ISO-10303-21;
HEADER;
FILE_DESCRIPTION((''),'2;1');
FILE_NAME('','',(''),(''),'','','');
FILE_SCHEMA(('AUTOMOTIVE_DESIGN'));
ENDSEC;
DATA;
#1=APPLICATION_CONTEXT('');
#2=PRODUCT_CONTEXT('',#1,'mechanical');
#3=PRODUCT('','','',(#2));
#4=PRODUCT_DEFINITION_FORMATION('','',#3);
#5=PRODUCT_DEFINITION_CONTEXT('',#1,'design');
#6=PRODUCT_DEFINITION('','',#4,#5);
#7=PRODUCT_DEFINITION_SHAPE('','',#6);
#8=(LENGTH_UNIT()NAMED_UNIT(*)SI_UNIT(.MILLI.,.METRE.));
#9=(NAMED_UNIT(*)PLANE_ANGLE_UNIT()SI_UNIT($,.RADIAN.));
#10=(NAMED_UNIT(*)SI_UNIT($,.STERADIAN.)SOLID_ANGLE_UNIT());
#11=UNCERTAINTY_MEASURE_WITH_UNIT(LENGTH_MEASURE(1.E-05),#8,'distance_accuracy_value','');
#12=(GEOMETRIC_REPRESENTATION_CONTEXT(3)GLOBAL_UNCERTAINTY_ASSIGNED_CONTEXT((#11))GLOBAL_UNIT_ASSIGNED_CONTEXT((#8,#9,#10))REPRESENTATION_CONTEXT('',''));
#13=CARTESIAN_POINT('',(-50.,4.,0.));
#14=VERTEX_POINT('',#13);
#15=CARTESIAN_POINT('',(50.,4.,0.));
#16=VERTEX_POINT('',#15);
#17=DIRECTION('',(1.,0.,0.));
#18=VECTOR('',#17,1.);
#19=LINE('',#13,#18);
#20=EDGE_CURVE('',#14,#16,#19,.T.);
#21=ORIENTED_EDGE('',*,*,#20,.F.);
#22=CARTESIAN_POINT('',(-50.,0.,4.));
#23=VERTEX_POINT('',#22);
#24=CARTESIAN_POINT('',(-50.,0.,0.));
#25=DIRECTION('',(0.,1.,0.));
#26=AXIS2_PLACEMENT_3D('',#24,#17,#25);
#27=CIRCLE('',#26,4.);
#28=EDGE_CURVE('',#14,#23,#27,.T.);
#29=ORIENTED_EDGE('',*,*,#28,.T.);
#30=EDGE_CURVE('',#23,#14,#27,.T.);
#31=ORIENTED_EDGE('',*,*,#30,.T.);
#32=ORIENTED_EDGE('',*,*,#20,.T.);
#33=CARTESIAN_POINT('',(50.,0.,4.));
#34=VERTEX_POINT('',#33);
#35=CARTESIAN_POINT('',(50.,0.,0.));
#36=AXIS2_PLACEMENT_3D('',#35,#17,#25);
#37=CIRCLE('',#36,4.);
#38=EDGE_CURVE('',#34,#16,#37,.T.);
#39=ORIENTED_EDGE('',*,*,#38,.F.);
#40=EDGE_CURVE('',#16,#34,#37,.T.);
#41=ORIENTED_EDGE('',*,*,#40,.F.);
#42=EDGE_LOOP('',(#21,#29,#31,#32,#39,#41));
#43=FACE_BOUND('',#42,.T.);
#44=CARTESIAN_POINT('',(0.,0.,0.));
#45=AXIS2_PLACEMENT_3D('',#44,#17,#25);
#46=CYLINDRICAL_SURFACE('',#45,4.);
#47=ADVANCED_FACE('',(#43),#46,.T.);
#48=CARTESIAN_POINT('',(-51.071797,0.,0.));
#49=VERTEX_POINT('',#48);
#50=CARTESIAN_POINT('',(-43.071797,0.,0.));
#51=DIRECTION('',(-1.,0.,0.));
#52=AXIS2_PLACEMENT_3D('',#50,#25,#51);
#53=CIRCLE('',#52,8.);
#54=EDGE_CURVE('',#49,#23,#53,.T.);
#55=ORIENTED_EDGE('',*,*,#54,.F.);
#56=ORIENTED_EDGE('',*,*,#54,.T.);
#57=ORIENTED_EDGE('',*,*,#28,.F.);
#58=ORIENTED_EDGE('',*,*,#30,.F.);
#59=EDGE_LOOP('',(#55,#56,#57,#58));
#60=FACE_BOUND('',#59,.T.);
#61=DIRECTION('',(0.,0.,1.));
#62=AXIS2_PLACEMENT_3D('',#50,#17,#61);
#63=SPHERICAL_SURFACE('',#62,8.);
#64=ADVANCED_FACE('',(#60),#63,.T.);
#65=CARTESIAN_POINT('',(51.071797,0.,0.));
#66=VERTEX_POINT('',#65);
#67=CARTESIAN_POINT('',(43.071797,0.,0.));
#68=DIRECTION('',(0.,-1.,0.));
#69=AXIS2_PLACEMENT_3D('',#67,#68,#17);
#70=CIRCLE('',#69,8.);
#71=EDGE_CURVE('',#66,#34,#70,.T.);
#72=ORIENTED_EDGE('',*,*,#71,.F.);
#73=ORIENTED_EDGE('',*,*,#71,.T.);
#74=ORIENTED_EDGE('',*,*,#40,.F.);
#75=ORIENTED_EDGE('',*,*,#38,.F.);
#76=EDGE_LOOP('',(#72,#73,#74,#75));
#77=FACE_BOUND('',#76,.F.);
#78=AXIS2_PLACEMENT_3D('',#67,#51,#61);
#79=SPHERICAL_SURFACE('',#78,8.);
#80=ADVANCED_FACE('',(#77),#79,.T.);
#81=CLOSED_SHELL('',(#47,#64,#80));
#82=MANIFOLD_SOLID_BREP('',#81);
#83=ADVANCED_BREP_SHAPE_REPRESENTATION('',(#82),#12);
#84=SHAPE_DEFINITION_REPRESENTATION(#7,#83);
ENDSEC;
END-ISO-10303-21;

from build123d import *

# Parameters (mm, degrees)
F0_R     = 4
F1_DEPTH = 50


# Not quite as in the source:
# - a pattern or mirror of a feature is missing from the dataset's text; its kind, count and spacing are read off the source's solid


with BuildPart() as f1:
    # F0 (on Right) → F1 (new body, symmetric)
    with BuildSketch(Plane.YZ):
        Circle(F0_R)
    extrude(amount=F1_DEPTH, both=True)

    # F2 (on Front) → F3 (revolve)
    with BuildSketch(Plane.XZ):
        with BuildLine():
            ThreePointArc((51.0717967697, 0), (50.79920338, 2.0705523608), (50, 4))
            Line((50, 4), (50, 0))
            Line((50, 0), (51.0717967697, 0))
        make_face()
    f3 = revolve(axis=Axis((0, 0, 0), (1, 0, 0)))

    # F3_copies: F3 across plane
    add(f3.mirror(Plane(origin=(0, 0, 0), x_dir=(0, 0, -1), z_dir=(-1, 0, 0))))


solid = f1.part
